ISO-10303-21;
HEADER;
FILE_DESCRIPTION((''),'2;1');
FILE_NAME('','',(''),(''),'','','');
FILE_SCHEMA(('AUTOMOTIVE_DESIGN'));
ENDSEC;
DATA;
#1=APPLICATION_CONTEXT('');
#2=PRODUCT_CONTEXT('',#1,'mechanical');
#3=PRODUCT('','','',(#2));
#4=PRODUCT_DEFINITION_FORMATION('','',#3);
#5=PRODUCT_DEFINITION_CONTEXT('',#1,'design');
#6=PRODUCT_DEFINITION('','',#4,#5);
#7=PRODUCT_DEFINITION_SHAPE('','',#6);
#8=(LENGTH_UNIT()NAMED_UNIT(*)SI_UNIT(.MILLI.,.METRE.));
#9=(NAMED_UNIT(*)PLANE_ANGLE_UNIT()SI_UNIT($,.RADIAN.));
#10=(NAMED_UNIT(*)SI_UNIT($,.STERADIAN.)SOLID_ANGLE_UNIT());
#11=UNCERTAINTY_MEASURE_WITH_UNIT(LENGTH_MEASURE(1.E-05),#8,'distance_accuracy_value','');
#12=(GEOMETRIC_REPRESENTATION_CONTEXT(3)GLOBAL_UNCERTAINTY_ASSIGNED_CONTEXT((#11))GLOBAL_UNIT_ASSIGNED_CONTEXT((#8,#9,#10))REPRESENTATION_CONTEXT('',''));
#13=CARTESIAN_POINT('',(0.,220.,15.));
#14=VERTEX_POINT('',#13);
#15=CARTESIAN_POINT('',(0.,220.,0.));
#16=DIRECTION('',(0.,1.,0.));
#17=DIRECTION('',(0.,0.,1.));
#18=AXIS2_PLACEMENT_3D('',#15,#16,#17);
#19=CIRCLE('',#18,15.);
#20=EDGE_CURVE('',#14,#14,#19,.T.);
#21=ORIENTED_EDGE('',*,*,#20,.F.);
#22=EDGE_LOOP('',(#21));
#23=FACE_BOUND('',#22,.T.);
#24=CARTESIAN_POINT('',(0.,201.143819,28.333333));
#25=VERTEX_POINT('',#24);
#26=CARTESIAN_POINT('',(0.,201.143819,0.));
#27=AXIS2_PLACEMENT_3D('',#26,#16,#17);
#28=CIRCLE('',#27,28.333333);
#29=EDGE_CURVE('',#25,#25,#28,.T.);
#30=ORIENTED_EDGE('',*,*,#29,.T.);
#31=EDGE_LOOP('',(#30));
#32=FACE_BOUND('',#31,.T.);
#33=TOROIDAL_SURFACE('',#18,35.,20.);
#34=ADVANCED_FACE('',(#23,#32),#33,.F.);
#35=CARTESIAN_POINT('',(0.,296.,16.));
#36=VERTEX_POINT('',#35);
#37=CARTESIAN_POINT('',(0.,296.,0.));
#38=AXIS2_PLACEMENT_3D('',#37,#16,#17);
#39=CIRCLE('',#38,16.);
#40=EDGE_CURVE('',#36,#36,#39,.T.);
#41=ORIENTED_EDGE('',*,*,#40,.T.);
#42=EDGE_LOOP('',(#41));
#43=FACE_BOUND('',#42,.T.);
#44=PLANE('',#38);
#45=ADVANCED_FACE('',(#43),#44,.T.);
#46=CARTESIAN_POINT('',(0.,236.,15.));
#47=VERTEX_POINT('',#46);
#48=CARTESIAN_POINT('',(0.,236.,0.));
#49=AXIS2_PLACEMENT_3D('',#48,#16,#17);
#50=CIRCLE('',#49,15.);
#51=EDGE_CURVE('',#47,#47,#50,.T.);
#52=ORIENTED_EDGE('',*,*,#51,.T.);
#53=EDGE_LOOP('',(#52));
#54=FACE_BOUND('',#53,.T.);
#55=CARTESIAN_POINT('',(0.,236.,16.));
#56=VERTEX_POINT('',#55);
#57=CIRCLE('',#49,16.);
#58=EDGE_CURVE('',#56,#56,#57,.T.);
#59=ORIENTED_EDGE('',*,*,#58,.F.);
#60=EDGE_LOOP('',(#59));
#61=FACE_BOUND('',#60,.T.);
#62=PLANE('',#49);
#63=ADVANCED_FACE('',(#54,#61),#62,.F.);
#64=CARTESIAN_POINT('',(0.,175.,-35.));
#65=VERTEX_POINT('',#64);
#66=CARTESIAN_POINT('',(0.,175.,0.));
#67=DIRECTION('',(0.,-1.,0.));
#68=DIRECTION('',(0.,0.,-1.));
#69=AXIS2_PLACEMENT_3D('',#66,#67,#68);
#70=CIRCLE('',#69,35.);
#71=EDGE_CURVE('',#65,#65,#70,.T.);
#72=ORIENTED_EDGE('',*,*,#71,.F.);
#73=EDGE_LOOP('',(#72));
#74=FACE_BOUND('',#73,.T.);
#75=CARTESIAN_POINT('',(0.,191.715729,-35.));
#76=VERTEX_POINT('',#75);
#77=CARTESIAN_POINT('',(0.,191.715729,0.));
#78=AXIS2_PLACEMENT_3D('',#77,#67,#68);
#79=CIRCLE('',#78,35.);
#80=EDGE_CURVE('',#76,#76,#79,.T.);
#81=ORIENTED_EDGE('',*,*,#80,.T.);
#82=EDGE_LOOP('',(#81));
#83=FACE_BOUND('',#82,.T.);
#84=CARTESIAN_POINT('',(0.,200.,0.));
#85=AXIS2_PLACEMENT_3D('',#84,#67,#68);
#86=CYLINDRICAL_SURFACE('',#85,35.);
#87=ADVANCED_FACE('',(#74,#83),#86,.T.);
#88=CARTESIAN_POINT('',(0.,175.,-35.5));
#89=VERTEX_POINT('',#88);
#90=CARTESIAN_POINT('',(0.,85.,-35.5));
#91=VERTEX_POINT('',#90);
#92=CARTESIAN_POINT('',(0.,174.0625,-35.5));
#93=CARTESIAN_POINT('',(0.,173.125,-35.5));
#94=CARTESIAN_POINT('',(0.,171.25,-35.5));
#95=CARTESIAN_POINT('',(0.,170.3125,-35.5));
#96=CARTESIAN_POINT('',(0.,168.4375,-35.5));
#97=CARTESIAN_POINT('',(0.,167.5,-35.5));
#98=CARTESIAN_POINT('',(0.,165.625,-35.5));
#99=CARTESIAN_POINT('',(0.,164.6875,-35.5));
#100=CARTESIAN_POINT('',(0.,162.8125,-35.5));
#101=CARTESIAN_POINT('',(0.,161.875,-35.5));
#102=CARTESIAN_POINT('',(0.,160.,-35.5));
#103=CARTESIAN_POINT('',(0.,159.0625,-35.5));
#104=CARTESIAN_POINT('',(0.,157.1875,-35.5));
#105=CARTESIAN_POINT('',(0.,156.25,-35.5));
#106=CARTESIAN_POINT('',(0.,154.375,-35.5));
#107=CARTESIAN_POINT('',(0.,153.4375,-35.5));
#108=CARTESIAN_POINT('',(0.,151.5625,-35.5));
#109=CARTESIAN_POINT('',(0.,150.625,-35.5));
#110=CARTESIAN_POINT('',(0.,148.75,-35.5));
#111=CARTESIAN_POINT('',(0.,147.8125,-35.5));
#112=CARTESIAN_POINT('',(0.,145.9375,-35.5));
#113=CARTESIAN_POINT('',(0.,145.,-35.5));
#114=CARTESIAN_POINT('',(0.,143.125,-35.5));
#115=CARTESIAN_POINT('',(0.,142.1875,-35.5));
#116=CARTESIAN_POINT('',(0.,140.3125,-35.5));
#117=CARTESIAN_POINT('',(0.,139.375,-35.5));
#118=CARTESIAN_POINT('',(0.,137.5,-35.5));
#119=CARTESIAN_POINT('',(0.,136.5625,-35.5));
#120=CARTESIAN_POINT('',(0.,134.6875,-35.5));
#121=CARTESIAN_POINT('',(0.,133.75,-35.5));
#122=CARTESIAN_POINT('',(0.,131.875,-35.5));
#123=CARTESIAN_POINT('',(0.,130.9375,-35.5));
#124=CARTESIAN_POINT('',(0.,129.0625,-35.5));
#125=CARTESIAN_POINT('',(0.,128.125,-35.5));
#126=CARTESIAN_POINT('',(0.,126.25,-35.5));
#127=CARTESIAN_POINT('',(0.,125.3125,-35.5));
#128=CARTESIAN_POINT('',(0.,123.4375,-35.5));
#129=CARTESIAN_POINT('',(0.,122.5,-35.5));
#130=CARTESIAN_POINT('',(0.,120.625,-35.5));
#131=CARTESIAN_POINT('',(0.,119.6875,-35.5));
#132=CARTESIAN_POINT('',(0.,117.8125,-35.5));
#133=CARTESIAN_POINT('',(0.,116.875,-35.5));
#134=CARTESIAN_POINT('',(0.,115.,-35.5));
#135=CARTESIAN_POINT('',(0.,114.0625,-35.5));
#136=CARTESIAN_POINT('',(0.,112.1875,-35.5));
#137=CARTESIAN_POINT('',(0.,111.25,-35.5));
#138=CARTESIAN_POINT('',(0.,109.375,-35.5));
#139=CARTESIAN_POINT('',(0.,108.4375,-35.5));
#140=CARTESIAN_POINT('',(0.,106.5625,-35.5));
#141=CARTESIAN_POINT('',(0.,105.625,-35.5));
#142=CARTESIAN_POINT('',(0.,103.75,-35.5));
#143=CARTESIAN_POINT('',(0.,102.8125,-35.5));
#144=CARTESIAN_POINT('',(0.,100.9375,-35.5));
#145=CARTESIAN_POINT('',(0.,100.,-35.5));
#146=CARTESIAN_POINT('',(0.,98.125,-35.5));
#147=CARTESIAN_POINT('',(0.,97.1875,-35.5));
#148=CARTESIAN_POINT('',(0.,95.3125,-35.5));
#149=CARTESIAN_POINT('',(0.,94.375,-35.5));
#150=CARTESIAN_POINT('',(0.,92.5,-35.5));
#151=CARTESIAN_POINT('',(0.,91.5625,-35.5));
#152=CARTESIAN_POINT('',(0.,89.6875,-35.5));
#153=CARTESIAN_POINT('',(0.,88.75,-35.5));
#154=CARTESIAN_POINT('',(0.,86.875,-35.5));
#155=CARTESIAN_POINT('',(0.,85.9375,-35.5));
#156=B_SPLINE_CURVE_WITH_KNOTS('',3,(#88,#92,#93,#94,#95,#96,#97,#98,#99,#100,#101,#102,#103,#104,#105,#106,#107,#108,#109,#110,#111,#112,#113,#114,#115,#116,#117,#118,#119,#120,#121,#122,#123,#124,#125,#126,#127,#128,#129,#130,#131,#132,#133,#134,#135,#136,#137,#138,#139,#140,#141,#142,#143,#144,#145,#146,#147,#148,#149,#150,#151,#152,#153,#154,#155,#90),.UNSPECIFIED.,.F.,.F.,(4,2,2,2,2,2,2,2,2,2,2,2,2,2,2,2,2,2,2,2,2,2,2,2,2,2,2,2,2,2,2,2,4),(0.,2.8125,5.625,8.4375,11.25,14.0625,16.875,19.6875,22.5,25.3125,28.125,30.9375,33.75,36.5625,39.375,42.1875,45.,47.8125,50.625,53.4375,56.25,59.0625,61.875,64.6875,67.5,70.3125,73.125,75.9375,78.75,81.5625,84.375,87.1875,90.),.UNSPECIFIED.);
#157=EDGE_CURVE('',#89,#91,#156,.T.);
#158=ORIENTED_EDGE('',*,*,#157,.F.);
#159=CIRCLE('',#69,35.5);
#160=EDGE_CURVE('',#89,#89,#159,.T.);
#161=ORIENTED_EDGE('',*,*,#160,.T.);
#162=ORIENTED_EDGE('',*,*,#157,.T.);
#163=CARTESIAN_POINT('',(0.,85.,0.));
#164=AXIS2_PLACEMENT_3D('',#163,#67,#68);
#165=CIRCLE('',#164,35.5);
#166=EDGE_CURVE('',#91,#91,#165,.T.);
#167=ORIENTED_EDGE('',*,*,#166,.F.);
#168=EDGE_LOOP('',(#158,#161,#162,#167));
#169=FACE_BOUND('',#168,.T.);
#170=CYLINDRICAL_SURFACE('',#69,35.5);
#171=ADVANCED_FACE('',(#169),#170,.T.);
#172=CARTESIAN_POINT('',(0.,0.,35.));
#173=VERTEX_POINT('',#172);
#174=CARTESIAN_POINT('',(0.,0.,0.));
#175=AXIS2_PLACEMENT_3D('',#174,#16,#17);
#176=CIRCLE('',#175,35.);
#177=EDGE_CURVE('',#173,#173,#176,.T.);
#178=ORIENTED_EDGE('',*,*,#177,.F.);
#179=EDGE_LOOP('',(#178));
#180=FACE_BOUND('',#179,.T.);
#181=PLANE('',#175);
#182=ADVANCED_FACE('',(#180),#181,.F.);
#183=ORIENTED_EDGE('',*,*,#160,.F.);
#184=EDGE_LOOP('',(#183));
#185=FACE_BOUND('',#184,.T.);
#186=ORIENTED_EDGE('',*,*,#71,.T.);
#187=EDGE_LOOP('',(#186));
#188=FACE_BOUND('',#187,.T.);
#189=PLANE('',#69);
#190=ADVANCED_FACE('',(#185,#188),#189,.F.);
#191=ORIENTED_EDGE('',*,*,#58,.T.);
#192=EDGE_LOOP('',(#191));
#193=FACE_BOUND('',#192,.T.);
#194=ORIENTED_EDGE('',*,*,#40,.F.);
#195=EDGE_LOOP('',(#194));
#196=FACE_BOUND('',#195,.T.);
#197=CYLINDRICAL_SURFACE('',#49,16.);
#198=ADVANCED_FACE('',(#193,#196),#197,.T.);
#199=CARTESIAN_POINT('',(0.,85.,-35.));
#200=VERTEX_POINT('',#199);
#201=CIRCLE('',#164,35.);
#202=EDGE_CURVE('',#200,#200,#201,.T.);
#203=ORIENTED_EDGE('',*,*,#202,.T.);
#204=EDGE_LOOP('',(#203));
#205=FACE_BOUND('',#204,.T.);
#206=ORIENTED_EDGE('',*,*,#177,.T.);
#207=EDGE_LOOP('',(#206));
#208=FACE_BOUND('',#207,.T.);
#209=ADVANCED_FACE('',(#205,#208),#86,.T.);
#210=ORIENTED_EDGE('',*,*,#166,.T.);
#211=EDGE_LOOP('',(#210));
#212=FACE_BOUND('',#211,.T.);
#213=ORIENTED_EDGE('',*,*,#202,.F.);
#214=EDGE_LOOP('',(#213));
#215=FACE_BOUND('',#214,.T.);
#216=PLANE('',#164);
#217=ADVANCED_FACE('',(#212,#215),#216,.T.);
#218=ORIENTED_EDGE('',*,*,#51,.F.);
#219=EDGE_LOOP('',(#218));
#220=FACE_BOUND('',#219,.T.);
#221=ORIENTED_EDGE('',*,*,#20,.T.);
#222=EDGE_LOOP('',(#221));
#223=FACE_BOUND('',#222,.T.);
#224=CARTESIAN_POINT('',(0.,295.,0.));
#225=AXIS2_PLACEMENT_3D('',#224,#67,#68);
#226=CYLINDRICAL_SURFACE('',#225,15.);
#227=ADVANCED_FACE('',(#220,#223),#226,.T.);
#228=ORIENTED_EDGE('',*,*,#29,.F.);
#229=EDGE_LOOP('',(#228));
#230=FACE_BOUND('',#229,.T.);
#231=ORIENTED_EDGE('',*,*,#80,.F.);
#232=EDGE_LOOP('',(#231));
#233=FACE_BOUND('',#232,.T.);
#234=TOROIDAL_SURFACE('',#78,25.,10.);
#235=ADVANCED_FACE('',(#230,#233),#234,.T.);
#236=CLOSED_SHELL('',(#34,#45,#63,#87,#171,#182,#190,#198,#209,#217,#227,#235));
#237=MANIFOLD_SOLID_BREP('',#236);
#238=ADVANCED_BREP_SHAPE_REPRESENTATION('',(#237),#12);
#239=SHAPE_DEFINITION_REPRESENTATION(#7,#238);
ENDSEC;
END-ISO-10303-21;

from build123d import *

# Parameters (mm, degrees)
SKETCH2_R           = 35
BOSS_EXTRUDE1_DEPTH = 200
SKETCH3_R           = 15
BOSS_EXTRUDE2_DEPTH = 95
FILLET1_R           = 20
FILLET2_R           = 10
BOSS_EXTRUDE3_START = 1
SKETCH4_R           = 16
BOSS_EXTRUDE3_DEPTH = 60
BOSS_EXTRUDE4_START = -85
SKETCH5_R           = 35.5
BOSS_EXTRUDE4_DEPTH = 90


with BuildPart() as part:
    # Sketch2 → Boss-Extrude1 (new body)
    with BuildSketch(Plane(origin=(0, 0, 0), x_dir=(1, 0, 0), z_dir=(0, 1, 0))):
        with Locations(Location((0, 0, 0), (0, 0, 270))):
            Circle(SKETCH2_R)
    extrude(amount=BOSS_EXTRUDE1_DEPTH)

    # Sketch3 → Boss-Extrude2 (add)
    with BuildSketch(Plane(origin=(0, 200, 0), x_dir=(1, 0, 0), z_dir=(0, 1, 0))):
        with Locations(Location((0, 0, 0), (0, 0, 270))):
            Circle(SKETCH3_R)
    extrude(amount=BOSS_EXTRUDE2_DEPTH)

    # Fillet1
    fillet1_edges = [part.edges().sort_by_distance(p)[0] for p in [
        (0, 200, -15),
    ]]
    fillet(fillet1_edges, radius=FILLET1_R - 0.0001)  # a hair under: the kernel refuses the full size

    # Fillet2
    fillet2_edges = [part.edges().sort_by_distance(p)[0] for p in [
        (0, 200, -35),
    ]]
    fillet(fillet2_edges, radius=FILLET2_R)

    # Sketch4 → Boss-Extrude3 (add)
    with BuildSketch(Plane(origin=(0, 295, 0), x_dir=(1, 0, 0), z_dir=(0, 1, 0)).offset(BOSS_EXTRUDE3_START)):
        with Locations(Location((0, 0, 0), (0, 0, 270))):
            Circle(SKETCH4_R)
    extrude(amount=-BOSS_EXTRUDE3_DEPTH)

    # Sketch5 → Boss-Extrude4 (add)
    with BuildSketch(Plane.XZ.offset(BOSS_EXTRUDE4_START)):
        with Locations(Location((0, 0, 0), (0, 0, 270))):
            Circle(SKETCH5_R)
    extrude(amount=-BOSS_EXTRUDE4_DEPTH)


solid = part.part
